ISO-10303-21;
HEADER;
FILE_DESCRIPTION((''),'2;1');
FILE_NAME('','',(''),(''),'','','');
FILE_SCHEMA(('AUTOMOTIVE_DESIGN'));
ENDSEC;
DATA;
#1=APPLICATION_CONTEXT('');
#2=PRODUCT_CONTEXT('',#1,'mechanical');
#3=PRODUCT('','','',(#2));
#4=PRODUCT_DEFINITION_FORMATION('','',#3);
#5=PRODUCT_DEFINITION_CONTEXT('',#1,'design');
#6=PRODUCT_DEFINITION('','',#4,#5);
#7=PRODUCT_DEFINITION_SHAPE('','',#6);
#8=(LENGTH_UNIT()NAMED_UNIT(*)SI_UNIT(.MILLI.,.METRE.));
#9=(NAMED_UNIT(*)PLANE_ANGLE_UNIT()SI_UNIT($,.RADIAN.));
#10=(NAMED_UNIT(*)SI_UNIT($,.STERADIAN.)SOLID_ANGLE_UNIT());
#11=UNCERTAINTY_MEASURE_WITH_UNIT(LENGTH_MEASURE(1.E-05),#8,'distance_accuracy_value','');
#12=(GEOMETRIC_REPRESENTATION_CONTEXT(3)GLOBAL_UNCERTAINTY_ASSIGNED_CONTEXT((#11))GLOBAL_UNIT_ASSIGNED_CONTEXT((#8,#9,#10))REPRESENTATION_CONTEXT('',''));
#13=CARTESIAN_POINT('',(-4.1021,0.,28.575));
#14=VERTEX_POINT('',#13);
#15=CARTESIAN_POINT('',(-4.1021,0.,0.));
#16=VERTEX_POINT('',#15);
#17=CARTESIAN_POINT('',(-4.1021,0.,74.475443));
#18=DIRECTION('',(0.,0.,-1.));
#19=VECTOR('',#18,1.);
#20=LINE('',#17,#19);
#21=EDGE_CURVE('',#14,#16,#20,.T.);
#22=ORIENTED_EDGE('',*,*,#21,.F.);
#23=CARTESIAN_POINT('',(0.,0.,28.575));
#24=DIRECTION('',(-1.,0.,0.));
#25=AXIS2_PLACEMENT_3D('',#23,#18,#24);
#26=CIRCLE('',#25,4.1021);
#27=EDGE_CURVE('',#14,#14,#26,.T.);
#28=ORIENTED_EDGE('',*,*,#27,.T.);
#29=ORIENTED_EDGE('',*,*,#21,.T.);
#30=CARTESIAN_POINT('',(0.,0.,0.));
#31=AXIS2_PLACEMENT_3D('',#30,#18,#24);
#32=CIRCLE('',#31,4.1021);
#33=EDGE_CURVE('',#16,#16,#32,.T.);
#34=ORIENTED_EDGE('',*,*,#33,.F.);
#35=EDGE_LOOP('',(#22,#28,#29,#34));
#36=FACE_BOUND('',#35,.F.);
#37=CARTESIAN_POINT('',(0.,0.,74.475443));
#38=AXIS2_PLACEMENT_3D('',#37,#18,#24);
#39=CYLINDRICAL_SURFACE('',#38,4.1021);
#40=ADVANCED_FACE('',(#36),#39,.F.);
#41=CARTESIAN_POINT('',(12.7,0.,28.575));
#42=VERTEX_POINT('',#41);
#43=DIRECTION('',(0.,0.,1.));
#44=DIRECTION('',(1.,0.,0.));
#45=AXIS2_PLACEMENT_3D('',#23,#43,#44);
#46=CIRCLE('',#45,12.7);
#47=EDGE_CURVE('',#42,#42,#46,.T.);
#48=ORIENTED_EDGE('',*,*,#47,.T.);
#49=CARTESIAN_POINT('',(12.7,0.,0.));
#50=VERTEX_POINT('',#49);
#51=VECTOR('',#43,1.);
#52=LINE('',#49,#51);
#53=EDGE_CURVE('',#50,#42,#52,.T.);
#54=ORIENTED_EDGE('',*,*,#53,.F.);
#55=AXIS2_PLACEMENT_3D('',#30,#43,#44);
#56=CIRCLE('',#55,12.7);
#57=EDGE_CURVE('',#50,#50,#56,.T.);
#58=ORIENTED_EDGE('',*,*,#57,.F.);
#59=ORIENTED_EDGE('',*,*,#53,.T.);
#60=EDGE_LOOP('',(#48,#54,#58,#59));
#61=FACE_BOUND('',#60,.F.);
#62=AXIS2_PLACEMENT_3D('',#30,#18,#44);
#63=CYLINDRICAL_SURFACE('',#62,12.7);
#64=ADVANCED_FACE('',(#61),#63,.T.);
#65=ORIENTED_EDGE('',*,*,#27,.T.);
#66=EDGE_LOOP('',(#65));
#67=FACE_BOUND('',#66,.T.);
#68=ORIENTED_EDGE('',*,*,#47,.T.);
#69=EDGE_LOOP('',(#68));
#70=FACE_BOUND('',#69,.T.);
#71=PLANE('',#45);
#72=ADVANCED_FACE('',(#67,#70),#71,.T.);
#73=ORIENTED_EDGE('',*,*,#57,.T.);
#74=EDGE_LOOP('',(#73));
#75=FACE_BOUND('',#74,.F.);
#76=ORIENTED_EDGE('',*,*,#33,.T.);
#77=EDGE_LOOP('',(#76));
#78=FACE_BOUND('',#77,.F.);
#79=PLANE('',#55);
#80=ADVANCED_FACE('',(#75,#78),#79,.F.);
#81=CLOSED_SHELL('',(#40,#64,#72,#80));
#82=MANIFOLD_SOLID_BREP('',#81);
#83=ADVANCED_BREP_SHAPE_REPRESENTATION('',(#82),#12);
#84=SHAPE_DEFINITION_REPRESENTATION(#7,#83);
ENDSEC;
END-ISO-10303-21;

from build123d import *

# Parameters (mm, degrees)
F0_R     = 12.7
F1_DEPTH = 28.575
F3_D     = 8.2042


# Not quite as in the source:
# - a feature names something its author has since deleted; it is built from what else it names


with BuildPart() as f1:
    # F0 (on Top) → F1 (new body)
    with BuildSketch(Plane.XY):
        Circle(F0_R)
    extrude(amount=F1_DEPTH)

    # F3 (through all)
    with Locations(Plane.XY.offset(28.575)):
        with Locations((0, 0)):
            Hole(F3_D / 2)


solid = f1.part
